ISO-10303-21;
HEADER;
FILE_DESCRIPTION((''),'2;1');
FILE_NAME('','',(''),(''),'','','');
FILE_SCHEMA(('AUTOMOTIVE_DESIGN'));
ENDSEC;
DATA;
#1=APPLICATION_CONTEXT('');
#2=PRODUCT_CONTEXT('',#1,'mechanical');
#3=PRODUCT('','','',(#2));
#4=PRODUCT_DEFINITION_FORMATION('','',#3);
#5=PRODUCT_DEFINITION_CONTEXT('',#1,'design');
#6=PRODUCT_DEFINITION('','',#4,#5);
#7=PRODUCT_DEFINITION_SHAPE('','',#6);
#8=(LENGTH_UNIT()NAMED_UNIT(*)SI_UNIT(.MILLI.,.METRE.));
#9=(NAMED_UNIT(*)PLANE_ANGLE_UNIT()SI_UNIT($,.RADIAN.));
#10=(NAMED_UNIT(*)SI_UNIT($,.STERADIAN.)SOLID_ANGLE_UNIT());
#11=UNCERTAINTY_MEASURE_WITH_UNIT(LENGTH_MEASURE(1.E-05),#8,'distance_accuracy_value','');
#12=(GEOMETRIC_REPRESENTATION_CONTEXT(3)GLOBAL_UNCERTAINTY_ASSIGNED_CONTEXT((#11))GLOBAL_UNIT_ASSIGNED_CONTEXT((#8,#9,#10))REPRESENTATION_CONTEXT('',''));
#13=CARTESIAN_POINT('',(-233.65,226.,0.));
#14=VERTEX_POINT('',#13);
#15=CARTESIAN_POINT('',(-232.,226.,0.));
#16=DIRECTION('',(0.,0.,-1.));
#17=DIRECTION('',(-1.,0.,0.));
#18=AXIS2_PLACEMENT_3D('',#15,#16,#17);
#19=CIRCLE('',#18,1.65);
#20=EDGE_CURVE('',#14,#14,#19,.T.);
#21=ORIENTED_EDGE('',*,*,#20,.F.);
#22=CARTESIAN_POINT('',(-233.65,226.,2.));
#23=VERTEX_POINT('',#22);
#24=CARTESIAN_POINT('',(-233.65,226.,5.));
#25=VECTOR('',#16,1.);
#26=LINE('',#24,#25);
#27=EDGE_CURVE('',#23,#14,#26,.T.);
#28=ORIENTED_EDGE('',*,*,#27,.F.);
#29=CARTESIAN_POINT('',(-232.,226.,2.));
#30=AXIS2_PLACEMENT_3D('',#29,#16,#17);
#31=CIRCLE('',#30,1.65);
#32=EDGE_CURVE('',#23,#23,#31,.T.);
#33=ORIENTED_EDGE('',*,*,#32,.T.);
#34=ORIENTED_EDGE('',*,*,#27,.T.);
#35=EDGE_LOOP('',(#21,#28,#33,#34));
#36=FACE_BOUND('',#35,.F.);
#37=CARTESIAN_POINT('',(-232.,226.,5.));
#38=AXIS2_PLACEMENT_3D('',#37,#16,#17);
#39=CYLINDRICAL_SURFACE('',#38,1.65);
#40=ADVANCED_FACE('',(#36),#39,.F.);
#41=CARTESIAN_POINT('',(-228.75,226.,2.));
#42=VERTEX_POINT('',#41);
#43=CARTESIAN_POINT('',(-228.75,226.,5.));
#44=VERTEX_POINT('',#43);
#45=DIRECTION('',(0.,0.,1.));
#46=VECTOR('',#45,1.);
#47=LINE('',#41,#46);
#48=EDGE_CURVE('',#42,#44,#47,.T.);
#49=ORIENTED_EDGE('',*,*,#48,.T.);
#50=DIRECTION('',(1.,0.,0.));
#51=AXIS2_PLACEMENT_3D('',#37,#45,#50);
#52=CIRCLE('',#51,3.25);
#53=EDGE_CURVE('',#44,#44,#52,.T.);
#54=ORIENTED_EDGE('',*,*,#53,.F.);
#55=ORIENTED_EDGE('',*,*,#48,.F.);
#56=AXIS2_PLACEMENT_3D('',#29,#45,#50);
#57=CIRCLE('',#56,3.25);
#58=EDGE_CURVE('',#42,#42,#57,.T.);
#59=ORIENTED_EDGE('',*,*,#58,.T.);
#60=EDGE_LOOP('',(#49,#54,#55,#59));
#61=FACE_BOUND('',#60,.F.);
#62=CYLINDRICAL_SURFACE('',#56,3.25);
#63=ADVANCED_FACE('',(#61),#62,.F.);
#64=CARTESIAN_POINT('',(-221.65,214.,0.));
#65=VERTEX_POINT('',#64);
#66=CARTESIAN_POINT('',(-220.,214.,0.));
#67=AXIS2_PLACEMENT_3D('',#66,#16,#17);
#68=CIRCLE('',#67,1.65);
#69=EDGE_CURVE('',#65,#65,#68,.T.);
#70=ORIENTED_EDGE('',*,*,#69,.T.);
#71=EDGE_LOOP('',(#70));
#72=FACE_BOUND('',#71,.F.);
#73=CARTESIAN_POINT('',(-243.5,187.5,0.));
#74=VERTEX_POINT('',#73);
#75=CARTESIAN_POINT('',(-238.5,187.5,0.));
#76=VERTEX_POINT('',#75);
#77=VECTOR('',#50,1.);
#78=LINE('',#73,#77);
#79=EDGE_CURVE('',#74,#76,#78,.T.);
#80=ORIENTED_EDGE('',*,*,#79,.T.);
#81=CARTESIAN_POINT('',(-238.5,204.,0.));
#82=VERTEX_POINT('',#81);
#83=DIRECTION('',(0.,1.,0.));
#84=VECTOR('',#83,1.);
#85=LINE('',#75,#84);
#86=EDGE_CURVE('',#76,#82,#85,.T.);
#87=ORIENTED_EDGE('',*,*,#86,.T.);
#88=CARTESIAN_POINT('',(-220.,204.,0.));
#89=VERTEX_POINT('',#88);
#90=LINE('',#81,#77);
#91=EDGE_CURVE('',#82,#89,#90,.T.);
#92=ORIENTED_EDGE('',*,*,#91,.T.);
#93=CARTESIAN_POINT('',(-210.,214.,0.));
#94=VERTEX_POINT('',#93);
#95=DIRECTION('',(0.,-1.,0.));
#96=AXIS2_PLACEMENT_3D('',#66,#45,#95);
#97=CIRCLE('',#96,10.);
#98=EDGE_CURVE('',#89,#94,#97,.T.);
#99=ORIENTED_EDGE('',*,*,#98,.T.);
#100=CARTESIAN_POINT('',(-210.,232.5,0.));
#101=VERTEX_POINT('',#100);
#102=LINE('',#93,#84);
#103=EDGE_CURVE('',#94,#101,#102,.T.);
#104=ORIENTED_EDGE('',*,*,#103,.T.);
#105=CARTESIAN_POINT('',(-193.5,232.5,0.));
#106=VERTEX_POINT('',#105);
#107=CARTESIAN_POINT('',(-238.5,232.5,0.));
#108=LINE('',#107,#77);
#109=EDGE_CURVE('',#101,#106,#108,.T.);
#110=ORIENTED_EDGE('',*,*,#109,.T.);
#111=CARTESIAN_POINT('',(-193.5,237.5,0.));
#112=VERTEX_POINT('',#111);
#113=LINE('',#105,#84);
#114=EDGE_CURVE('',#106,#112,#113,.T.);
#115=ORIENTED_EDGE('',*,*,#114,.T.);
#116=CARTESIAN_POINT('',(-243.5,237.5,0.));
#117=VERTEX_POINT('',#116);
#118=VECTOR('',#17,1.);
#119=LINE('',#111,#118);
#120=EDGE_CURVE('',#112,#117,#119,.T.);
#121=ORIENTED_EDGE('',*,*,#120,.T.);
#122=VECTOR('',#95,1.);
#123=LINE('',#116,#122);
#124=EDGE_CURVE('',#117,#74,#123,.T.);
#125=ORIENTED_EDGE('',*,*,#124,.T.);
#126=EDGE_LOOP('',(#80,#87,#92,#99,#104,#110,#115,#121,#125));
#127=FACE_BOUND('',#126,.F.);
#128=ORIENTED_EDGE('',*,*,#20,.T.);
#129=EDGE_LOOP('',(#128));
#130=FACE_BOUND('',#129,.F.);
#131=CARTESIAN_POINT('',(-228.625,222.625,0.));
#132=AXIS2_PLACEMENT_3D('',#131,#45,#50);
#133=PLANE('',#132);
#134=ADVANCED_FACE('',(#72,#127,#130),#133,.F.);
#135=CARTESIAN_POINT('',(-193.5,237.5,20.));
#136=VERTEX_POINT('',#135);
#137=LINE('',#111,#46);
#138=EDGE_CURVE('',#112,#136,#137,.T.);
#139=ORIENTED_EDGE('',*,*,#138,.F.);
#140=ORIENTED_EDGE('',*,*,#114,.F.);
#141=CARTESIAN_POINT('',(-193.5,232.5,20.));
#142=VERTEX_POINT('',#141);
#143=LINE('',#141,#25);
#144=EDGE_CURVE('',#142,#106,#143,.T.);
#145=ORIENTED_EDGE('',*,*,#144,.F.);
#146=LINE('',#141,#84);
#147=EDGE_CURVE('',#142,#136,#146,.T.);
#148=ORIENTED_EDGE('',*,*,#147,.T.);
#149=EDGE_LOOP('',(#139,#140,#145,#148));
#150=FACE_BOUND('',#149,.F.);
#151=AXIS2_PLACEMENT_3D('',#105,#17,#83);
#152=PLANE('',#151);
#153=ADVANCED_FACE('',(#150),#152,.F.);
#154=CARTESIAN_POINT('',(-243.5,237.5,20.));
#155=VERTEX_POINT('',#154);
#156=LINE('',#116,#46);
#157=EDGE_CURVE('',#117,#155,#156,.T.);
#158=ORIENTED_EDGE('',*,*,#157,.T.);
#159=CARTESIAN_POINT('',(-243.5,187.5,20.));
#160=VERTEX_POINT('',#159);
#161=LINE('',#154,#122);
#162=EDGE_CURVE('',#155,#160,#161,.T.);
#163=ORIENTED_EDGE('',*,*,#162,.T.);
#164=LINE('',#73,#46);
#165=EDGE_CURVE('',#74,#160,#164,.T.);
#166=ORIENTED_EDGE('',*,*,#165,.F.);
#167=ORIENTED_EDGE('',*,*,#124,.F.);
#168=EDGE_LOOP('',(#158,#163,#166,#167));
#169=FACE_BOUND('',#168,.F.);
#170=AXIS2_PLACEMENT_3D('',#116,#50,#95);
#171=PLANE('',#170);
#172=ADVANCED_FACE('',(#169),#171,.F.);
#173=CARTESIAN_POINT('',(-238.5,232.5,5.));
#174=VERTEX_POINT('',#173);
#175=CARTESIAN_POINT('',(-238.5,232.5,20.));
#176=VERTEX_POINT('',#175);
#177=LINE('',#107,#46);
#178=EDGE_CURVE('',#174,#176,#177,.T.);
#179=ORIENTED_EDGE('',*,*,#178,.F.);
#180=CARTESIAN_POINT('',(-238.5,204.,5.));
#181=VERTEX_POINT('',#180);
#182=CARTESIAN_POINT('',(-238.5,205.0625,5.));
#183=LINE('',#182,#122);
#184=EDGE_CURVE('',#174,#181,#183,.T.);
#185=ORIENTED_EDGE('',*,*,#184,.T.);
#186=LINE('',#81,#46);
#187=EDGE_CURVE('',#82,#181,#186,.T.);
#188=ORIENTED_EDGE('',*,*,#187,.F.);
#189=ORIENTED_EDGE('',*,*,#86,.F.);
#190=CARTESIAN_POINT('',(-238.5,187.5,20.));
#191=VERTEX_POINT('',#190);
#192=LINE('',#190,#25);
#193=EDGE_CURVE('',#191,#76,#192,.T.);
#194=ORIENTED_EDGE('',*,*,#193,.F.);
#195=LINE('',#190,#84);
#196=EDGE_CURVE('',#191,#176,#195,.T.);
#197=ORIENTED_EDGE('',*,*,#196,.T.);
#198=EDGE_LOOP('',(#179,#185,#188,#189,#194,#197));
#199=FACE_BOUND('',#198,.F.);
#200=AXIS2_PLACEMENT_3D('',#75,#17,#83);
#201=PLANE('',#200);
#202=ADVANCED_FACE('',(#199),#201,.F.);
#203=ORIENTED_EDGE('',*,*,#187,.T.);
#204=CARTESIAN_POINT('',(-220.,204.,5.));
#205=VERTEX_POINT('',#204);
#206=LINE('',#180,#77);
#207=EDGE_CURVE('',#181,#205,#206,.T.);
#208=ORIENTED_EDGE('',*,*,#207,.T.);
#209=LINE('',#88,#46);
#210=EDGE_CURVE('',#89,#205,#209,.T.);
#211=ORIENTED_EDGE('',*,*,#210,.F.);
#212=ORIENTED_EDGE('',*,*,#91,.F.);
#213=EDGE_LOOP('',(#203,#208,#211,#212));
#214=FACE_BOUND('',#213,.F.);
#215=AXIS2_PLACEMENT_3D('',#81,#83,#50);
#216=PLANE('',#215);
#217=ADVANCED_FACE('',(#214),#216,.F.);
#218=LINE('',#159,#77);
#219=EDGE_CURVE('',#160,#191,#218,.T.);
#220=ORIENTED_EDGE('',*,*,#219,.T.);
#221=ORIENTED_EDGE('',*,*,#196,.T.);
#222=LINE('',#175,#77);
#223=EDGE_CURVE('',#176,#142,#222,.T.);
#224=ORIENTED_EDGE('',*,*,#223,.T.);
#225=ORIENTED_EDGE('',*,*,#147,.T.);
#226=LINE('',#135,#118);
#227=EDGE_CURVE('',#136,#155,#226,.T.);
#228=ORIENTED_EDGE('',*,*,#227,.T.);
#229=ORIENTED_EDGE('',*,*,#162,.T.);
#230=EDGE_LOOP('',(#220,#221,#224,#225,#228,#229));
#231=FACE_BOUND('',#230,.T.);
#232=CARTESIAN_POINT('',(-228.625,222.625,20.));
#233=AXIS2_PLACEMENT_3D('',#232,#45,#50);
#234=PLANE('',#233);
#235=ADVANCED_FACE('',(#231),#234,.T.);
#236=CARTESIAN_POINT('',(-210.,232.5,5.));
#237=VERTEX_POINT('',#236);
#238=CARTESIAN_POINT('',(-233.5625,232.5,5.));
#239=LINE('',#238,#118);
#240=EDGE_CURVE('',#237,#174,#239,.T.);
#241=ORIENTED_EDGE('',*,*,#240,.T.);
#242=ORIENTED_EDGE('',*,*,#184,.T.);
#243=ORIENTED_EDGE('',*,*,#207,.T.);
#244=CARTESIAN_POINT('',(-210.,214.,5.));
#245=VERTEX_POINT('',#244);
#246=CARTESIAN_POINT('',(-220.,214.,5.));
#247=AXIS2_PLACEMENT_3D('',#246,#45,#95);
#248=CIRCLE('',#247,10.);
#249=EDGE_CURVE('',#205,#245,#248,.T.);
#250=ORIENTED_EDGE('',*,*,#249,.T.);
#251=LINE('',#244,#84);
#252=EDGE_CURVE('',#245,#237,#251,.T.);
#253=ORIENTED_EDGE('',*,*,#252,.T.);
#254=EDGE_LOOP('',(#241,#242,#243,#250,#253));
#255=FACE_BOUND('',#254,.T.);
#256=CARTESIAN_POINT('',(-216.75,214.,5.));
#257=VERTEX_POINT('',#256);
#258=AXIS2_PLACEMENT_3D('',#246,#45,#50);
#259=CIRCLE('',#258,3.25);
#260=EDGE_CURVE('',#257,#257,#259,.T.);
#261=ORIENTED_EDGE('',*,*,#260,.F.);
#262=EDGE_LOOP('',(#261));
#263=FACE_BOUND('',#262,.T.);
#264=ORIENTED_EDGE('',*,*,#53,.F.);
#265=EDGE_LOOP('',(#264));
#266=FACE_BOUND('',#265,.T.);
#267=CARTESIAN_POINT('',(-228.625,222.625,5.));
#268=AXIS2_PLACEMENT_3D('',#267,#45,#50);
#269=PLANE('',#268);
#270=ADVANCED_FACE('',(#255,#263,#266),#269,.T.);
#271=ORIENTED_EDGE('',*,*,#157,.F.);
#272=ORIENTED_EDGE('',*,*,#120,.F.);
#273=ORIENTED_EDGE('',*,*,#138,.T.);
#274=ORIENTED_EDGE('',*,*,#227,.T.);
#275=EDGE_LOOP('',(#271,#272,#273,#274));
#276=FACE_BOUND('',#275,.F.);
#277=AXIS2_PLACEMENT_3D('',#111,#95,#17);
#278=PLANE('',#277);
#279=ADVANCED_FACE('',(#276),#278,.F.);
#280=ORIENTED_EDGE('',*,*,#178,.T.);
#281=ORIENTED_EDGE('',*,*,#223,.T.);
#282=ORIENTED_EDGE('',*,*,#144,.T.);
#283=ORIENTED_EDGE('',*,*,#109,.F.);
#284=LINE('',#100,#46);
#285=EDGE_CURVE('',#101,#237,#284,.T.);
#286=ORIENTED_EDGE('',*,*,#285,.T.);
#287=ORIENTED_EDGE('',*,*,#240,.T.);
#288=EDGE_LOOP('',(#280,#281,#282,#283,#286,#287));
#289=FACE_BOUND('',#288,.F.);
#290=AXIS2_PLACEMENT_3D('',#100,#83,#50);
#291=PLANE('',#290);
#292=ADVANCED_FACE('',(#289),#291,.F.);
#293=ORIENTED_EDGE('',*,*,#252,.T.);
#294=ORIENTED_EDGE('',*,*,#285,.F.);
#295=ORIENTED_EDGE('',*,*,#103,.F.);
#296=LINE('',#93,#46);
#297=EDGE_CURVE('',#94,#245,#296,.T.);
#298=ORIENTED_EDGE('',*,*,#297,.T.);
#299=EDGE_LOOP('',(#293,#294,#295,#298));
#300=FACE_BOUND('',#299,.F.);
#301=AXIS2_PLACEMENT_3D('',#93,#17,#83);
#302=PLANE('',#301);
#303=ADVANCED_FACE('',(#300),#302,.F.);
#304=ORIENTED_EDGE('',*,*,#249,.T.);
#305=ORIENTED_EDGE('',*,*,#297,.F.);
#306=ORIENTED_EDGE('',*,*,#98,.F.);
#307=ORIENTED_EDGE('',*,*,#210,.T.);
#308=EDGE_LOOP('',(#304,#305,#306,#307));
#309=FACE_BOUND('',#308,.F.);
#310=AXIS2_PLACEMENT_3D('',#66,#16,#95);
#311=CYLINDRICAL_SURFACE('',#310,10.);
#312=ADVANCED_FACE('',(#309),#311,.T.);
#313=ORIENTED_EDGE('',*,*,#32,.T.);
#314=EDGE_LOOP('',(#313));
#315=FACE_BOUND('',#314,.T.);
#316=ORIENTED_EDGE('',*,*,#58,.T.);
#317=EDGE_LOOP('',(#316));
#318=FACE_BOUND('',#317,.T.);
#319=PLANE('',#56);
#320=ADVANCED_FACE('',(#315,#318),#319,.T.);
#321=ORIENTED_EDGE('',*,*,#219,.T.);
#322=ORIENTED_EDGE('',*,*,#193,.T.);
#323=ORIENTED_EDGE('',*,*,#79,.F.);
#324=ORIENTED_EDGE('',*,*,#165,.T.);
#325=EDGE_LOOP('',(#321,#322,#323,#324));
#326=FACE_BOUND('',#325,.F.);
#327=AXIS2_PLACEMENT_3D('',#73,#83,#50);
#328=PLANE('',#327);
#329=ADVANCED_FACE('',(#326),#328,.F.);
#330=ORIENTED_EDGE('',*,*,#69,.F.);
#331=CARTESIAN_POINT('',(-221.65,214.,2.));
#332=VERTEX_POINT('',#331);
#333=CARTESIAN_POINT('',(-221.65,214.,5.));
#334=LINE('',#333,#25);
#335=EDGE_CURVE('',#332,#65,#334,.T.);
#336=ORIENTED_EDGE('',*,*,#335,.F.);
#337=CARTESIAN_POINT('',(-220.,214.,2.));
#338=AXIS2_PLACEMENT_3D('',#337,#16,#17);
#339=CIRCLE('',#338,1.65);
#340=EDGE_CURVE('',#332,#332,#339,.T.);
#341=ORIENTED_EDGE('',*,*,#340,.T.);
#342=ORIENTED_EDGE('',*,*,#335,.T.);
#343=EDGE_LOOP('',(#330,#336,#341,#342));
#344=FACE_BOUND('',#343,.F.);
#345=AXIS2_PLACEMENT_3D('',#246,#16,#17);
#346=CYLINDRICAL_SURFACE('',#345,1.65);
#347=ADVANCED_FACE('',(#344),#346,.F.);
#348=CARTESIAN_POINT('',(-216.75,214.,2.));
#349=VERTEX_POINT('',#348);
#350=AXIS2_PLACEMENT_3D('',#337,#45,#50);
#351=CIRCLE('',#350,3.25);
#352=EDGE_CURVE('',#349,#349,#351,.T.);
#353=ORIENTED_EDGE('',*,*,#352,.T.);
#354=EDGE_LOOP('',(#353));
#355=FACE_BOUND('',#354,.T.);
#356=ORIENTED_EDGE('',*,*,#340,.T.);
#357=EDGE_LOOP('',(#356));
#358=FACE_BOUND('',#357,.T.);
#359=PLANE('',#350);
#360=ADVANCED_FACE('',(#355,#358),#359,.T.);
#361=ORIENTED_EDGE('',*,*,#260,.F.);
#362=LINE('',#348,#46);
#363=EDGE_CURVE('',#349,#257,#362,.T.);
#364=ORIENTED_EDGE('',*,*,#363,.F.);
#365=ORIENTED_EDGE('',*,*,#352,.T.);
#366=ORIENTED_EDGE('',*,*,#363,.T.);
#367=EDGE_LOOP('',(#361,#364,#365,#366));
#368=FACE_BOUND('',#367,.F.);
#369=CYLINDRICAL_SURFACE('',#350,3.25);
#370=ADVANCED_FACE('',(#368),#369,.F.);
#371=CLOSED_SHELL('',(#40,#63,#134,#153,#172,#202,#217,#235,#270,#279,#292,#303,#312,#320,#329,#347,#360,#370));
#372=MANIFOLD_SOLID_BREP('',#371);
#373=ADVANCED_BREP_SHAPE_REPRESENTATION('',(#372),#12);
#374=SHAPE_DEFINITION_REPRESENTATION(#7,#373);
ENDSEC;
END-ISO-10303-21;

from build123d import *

# Parameters (mm, degrees)
F4_DEPTH       = 5
F5_DEPTH       = 20
F7_D           = 3.3
F7_CBORE_D     = 6.5
F7_CBORE_DEPTH = 3


# Not quite as in the source:
# - the program builds the solid bodies; features that only make, move or delete a surface that nothing else refers to are left out


with BuildPart() as f4:
    # F3 (on Top) → F4 (new body)
    with BuildSketch(Plane.XY):
        Polygon((-193.5, 232.5), (-193.5, 237.5), (-243.5, 237.5), (-243.5, 187.5), (-238.5, 187.5), (-238.5, 204), (-238.5, 232.5), (-210, 232.5), align=None)
        with BuildLine():
            Line((-210, 214), (-210, 232.5))
            Line((-210, 232.5), (-238.5, 232.5))
            Line((-238.5, 232.5), (-238.5, 204))
            Line((-238.5, 204), (-220, 204))
            ThreePointArc((-220, 204), (-227.0710678119, 221.0710678119), (-210, 214))
        make_face()
        with BuildLine():
            ThreePointArc((-220, 204), (-212.9289321881, 206.9289321881), (-210, 214))
            ThreePointArc((-210, 214), (-227.0710678119, 221.0710678119), (-220, 204))
        make_face()
    extrude(amount=F4_DEPTH)

    # F3 (on Top) → F5 (join)
    with BuildSketch(Plane.XY):
        Polygon((-193.5, 232.5), (-193.5, 237.5), (-243.5, 237.5), (-243.5, 187.5), (-238.5, 187.5), (-238.5, 204), (-238.5, 232.5), (-210, 232.5), align=None)
    extrude(amount=F5_DEPTH)

    # F7 (through all)
    with Locations(Plane.XY.offset(5)):
        with Locations((-232, 226), (-220, 214)):
            CounterBoreHole(F7_D / 2, F7_CBORE_D / 2, F7_CBORE_DEPTH)


solid = f4.part
